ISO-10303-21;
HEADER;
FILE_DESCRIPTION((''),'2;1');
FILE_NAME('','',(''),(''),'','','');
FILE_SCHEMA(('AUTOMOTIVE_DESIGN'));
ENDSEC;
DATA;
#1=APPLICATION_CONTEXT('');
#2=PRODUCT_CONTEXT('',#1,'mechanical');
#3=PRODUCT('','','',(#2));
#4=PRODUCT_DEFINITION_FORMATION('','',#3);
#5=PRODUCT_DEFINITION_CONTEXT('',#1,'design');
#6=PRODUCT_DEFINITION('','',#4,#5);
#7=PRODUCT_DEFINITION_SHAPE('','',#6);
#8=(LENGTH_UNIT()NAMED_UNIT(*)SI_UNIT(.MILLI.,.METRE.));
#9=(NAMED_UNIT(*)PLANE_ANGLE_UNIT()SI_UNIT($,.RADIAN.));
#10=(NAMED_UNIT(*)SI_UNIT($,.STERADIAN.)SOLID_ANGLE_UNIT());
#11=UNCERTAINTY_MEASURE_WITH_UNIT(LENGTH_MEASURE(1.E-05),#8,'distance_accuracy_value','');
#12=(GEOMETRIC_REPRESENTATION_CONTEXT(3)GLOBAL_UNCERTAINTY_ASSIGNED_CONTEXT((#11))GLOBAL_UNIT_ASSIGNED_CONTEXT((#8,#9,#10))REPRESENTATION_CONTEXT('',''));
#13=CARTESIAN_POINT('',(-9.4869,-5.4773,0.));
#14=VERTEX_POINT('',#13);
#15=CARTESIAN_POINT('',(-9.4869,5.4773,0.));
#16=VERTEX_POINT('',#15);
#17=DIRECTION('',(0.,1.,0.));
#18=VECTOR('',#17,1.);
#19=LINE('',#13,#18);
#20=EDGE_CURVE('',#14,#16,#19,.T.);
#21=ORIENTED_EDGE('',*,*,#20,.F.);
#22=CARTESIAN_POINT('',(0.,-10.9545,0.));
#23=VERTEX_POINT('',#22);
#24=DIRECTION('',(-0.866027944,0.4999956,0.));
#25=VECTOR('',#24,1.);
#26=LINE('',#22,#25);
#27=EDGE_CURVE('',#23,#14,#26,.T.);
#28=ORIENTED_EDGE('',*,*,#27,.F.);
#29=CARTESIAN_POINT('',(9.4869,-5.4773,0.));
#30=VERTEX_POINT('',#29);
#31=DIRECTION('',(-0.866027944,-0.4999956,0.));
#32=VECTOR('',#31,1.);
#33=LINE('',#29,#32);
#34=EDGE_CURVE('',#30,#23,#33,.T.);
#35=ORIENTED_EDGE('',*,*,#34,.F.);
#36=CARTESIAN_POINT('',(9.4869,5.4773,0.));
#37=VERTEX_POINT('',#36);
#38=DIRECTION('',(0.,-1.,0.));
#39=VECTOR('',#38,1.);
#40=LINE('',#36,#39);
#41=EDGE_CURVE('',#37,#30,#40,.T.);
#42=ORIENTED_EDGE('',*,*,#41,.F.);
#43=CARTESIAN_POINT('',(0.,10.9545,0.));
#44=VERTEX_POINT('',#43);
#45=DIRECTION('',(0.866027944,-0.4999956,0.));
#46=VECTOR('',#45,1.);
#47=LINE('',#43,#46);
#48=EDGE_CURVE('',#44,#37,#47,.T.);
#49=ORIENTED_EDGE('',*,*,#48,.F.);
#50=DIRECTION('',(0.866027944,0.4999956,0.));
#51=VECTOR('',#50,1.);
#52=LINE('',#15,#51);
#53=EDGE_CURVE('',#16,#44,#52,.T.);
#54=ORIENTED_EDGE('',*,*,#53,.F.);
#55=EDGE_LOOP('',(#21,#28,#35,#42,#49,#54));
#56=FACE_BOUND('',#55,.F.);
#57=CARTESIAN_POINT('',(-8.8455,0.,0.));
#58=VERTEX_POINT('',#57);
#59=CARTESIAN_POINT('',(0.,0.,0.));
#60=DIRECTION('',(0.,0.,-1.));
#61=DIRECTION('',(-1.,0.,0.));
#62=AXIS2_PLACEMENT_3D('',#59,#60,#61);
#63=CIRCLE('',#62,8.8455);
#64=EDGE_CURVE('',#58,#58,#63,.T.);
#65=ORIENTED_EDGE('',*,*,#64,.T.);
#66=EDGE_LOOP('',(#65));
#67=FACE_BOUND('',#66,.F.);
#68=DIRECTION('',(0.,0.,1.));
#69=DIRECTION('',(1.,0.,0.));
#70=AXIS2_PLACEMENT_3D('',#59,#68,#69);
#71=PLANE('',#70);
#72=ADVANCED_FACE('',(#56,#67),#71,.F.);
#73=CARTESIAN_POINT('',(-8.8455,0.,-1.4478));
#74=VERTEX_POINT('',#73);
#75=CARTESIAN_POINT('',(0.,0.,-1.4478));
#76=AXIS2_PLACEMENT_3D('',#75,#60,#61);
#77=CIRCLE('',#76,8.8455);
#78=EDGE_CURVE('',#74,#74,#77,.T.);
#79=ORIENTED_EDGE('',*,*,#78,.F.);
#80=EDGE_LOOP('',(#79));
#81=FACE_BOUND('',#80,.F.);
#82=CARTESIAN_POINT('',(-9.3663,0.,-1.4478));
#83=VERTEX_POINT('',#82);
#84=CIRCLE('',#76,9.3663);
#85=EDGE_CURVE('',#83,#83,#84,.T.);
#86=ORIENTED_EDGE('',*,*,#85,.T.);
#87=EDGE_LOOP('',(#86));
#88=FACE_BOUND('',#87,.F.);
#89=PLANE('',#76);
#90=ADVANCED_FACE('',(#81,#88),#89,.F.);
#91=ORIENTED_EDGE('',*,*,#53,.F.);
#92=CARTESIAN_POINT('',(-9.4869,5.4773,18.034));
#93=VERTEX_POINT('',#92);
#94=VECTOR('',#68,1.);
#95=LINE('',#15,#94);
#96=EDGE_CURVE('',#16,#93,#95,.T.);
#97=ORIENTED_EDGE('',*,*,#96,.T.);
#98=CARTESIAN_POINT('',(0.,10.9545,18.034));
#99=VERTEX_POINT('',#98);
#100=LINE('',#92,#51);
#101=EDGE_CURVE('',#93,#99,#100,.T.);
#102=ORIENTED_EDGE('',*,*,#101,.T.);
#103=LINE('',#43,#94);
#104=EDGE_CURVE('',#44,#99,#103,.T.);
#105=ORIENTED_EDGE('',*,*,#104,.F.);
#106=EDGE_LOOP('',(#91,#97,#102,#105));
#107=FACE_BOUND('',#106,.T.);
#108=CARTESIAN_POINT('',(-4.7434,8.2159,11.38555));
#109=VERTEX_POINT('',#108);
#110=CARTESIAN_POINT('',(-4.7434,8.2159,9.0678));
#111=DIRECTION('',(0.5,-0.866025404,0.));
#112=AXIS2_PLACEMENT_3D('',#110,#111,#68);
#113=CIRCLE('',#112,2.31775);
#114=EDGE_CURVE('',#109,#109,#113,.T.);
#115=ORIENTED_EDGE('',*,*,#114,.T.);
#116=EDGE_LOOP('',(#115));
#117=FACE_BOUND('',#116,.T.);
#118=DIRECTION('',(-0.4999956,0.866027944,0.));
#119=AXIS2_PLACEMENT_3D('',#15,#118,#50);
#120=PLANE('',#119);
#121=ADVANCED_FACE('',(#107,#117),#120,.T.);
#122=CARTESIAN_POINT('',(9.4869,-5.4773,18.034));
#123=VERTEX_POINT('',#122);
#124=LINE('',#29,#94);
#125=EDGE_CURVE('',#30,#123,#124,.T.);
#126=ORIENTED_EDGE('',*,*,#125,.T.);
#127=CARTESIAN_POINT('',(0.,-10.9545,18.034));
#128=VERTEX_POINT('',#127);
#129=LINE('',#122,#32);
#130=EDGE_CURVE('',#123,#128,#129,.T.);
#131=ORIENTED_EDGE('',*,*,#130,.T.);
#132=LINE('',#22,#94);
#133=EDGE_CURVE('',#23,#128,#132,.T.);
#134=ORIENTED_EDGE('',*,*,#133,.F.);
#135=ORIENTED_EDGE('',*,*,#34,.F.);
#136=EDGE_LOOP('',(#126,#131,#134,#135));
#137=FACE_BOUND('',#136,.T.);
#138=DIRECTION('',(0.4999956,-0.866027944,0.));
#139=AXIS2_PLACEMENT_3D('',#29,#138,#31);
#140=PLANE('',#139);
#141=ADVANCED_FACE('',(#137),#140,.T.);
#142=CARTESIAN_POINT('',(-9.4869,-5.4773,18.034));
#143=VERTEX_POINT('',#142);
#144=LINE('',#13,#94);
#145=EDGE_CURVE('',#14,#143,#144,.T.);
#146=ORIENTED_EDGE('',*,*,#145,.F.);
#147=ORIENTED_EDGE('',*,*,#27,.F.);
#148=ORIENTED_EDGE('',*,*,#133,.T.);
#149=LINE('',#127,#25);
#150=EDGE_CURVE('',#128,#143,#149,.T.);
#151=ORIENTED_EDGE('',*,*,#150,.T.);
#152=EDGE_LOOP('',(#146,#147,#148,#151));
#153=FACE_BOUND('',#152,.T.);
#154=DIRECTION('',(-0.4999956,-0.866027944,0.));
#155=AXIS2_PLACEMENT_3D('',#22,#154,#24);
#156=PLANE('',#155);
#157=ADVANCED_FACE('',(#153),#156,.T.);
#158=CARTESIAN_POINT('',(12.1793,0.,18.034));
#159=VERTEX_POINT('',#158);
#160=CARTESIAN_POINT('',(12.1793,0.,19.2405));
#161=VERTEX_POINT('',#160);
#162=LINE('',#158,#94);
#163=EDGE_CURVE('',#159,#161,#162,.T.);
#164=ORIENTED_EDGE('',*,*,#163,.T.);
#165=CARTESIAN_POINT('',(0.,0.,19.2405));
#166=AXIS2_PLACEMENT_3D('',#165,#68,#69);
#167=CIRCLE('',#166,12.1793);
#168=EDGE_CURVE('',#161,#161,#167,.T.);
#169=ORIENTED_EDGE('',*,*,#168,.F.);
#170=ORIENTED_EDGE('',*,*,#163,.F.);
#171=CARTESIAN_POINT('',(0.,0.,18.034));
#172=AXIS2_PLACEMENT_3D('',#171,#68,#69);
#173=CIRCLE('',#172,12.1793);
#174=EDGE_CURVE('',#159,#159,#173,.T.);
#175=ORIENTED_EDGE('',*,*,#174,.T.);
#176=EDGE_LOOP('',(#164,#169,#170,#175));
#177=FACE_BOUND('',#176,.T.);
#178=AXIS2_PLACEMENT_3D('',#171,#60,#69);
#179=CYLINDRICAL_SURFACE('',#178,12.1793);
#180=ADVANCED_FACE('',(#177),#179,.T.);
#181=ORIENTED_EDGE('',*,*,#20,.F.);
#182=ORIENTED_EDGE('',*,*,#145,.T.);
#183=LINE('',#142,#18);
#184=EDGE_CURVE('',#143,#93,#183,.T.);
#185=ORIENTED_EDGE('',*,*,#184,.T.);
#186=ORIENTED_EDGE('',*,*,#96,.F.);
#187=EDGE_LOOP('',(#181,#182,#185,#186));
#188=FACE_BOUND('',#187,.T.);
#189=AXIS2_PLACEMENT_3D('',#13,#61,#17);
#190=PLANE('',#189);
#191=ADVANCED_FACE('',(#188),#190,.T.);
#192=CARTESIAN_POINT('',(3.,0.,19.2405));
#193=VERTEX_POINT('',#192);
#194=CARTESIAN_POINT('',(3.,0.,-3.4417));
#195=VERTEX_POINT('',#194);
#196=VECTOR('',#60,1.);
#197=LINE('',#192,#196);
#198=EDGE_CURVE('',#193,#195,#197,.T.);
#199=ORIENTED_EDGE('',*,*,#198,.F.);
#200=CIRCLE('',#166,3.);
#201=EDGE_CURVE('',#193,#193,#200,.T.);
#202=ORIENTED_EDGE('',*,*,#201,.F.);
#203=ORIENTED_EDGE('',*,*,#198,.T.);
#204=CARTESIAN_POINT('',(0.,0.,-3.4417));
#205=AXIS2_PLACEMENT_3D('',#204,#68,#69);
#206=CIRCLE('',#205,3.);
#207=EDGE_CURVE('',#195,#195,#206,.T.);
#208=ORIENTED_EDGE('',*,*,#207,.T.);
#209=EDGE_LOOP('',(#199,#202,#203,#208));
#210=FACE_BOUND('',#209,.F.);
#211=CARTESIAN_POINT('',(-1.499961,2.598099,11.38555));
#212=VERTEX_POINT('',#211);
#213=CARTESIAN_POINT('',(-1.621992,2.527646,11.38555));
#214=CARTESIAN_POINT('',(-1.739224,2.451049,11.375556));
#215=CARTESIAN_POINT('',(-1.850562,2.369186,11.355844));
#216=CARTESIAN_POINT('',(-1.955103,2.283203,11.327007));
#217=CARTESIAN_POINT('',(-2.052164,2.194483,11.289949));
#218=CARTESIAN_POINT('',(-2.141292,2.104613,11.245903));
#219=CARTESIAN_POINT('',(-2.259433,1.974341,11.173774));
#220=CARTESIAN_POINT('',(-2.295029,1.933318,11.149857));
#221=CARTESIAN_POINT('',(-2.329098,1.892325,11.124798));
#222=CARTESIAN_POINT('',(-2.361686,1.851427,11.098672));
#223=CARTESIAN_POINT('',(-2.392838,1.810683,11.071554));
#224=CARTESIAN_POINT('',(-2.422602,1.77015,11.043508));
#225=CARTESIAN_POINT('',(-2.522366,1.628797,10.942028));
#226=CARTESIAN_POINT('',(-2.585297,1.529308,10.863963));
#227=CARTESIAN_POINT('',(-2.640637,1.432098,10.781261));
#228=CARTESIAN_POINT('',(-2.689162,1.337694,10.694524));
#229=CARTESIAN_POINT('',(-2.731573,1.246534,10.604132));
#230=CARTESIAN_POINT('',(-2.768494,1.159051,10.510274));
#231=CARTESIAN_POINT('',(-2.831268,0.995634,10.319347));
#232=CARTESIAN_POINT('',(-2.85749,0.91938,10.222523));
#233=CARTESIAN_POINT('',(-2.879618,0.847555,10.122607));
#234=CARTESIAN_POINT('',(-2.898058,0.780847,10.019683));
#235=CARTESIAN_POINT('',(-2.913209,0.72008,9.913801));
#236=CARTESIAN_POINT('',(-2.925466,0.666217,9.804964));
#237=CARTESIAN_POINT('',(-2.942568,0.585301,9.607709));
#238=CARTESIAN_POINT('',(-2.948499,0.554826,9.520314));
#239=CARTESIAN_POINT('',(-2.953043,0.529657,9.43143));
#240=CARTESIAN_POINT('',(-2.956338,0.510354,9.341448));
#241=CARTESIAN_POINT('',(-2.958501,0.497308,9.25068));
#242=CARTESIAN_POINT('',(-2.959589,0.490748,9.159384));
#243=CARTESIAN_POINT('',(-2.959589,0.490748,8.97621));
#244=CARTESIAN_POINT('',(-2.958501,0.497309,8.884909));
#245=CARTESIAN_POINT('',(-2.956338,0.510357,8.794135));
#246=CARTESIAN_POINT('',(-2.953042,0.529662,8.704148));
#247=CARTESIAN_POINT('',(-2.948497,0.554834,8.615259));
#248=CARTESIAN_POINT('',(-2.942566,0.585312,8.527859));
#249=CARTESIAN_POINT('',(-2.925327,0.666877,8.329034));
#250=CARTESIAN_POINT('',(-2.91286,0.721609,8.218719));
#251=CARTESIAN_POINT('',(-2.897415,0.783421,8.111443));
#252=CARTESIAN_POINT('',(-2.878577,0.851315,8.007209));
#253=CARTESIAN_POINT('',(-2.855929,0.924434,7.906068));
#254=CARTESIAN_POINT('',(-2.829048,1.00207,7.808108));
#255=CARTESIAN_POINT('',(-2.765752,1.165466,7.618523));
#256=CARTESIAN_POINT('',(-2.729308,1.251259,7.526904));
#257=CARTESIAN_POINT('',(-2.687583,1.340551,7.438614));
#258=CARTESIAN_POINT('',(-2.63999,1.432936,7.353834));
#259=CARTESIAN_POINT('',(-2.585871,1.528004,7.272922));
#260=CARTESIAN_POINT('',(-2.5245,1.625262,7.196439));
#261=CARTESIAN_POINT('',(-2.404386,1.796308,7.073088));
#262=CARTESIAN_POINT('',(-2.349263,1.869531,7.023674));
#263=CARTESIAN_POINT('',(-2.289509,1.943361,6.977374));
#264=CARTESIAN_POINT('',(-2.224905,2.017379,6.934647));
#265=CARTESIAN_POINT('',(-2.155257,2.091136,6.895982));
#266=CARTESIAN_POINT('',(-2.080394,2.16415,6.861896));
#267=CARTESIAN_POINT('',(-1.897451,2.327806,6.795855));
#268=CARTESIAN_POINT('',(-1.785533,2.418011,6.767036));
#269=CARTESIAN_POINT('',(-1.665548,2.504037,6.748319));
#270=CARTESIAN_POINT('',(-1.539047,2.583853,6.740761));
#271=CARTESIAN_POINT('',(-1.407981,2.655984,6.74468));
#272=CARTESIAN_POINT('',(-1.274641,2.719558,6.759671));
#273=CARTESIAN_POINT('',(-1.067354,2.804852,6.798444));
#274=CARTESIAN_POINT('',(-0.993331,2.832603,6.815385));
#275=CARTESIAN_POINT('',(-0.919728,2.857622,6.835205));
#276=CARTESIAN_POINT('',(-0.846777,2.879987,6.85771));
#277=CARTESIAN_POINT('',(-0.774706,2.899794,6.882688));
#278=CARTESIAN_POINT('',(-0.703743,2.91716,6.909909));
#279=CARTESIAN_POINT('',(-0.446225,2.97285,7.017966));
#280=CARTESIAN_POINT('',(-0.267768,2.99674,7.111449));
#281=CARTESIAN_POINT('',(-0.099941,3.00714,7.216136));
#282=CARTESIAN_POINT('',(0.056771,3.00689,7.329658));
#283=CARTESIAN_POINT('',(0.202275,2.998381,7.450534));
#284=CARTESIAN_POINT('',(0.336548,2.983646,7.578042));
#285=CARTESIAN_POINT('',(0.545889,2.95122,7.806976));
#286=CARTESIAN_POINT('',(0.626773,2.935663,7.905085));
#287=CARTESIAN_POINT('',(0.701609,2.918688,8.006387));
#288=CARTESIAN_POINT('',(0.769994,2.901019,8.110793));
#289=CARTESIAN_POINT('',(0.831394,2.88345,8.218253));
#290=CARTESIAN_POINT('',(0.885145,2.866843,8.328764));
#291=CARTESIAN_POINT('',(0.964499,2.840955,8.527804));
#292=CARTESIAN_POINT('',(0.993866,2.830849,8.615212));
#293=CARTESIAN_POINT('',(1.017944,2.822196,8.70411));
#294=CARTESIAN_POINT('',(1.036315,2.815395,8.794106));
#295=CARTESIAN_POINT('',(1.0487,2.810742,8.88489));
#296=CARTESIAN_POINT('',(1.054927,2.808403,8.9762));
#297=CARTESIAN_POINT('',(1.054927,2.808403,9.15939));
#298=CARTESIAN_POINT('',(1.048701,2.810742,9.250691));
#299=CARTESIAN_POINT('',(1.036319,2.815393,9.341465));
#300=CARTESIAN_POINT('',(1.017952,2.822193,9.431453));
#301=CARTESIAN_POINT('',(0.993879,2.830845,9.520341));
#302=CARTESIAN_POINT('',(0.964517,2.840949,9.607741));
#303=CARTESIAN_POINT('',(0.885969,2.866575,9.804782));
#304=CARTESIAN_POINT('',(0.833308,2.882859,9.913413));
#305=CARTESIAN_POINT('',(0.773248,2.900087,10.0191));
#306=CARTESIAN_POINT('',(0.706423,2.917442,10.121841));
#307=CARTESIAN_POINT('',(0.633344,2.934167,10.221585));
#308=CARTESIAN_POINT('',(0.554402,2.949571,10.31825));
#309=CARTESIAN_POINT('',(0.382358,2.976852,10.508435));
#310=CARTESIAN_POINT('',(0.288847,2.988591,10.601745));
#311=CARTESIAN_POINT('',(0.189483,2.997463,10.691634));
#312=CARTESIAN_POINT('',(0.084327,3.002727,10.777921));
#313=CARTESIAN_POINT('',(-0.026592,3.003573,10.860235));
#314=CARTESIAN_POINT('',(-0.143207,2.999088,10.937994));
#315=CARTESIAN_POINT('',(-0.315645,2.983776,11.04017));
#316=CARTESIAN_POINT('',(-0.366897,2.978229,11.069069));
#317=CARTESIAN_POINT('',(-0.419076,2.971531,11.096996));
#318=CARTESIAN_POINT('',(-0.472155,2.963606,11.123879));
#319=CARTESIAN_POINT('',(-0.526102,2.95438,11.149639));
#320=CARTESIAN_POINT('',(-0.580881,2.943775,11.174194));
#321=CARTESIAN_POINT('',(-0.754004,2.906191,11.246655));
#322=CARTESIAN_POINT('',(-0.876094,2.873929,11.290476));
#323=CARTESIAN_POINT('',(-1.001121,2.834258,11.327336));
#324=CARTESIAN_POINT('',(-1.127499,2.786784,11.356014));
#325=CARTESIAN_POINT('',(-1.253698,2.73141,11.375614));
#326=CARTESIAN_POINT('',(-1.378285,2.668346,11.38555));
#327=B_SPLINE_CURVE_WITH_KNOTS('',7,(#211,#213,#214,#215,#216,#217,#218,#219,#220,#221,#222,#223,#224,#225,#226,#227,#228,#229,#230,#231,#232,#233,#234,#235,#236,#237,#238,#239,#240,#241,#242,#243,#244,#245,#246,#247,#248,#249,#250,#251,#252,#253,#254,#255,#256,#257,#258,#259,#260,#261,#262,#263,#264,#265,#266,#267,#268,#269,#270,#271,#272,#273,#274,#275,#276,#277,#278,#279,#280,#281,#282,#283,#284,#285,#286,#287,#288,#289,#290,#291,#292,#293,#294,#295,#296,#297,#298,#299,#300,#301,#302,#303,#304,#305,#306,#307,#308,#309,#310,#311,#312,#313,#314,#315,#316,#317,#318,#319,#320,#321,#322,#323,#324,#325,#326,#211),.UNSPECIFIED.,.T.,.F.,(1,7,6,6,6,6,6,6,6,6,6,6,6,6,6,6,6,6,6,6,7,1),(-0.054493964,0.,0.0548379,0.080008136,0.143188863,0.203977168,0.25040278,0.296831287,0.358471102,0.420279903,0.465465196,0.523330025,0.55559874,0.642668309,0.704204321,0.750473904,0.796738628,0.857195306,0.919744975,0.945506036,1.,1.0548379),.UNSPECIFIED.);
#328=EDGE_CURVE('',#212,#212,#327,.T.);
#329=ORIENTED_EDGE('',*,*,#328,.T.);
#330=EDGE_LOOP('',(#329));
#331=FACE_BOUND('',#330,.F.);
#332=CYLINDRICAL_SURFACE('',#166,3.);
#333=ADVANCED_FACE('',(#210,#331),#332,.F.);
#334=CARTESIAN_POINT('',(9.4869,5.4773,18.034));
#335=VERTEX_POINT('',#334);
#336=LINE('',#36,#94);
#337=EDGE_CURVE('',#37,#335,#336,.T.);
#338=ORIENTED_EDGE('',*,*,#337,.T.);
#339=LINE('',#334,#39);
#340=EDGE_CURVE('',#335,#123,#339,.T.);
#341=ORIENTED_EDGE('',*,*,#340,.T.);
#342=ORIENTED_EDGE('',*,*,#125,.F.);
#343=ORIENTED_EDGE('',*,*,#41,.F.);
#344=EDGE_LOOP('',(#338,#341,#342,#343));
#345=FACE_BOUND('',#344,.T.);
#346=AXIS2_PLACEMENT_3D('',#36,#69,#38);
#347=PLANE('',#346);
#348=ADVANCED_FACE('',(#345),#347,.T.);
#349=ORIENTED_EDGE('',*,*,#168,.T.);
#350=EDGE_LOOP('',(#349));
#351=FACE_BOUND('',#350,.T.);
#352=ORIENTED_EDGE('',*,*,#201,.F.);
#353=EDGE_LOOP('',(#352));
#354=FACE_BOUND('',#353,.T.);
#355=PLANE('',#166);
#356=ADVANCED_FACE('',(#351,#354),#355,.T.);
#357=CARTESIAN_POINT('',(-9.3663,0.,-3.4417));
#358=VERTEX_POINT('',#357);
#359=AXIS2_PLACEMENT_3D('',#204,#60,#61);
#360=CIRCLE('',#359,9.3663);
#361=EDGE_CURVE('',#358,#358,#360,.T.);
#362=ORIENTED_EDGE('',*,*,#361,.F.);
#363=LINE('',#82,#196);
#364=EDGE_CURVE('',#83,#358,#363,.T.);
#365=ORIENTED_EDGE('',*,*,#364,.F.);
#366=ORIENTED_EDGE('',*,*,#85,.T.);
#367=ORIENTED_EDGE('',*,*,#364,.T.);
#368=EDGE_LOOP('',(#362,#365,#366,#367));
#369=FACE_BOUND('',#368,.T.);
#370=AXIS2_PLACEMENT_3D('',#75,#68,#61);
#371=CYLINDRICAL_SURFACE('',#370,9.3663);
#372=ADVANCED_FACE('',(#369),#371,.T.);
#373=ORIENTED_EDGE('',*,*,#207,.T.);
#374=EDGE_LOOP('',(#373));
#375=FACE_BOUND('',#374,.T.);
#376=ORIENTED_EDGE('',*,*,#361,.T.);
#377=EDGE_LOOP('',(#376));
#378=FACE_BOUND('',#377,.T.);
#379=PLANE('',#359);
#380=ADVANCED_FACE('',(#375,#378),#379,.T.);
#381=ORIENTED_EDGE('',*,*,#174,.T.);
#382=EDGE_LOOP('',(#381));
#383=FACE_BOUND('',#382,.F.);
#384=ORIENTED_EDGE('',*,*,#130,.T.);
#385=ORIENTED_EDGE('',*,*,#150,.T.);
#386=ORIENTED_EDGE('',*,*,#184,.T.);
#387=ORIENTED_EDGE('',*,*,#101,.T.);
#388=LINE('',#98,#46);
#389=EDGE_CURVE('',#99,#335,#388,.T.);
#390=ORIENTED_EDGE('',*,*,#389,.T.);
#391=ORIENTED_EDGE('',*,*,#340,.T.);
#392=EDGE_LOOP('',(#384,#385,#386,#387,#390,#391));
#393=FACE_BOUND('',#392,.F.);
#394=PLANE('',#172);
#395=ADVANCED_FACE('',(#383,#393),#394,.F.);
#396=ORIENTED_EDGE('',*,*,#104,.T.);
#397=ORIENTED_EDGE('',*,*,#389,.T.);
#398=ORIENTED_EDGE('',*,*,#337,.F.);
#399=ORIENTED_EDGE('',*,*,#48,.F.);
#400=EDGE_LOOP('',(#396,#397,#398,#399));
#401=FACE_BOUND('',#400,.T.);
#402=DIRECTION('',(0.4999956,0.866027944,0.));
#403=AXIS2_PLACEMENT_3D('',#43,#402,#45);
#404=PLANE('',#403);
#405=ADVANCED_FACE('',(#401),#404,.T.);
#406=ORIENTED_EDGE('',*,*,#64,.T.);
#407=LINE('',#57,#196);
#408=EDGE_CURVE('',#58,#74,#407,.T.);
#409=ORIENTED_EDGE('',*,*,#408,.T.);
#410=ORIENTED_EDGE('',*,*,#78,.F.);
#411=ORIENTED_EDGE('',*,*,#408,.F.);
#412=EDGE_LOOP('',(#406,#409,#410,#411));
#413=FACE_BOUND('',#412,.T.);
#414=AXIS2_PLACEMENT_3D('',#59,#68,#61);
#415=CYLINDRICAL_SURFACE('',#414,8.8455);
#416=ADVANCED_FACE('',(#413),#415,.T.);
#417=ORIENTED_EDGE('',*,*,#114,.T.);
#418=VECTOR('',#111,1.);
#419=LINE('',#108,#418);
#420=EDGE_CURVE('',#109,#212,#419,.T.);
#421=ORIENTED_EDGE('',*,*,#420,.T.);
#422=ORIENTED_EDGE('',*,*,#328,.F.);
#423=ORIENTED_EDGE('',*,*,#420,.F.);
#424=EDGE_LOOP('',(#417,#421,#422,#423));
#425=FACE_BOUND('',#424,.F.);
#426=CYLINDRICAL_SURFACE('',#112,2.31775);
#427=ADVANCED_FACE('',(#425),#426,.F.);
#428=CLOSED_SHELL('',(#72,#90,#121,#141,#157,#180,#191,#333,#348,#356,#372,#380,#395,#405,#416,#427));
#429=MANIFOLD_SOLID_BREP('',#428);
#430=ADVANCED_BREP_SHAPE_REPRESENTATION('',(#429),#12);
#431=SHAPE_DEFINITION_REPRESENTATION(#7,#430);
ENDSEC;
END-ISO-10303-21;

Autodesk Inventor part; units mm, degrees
ref_plane "YZ Plane" through (0, 0, 0) normal (1, 0, 0) x (0, 1, 0)
ref_plane "XZ Plane" through (0, 0, 0) normal (0, 1, 0) x (-1, 0, 0)
ref_plane "XY Plane" through (0, 0, 0) normal (0, 0, 1) x (1, 0, 0)
sketch "Sketch1" plane through (0, 0, 0) normal (0, 0, 1) x (1, 0, 0)
  line L0 (-9.4869, 5.4773) -> (0, 10.9545)
  line L1 (0, 10.9545) -> (9.4869, 5.4773)
  line L2 (9.4869, 5.4773) -> (9.4869, -5.4773)
  line L3 (9.4869, -5.4773) -> (0, -10.9545)
  line L4 (0, -10.9545) -> (-9.4869, -5.4773)
  line L5 (-9.4869, -5.4773) -> (-9.4869, 5.4773)
  point P0 (0, 0)
  point P1 (0, 0)
  dimension "d0" = 18.9738
extrude "Extrusion1" add sketch "Sketch1" along normal blind 18.034
sketch "Sketch2" plane through (0, 0, 18.034) normal (0, 0, 1) x (1, 0, 0)
  circle A0 centre (0, 0) radius 12.1793
  dimension "d3" = 24.3586
extrude "Extrusion2" add sketch "Sketch2" along normal blind 1.2065
sketch "Sketch3" plane through (0, 0, 0) normal (0, 0, -1) x (-1, 0, 0)
  circle A0 centre (0, 0) radius 8.8455
  dimension "d6" = 17.6911
extrude "Extrusion3" add sketch "Sketch3" along normal blind 1.4478
sketch "Sketch4" plane through (0, 0, -1.4478) normal (0, 0, -1) x (-1, 0, 0)
  circle A0 centre (0, 0) radius 9.3663
  dimension "d9" = 18.7325
extrude "Extrusion4" add sketch "Sketch4" along normal blind 1.9939
sketch "Sketch5" plane through (0, 0, 19.2405) normal (0, 0, 1) x (1, 0, 0)
  circle A0 centre (0, 0) radius 3
  dimension "d12" = 6
extrude "Extrusion5" cut sketch "Sketch5" against normal through all
sketch "Sketch6" plane through (0, 10.9545, 18.034) normal (-0.5, 0.8660254, 0) x (0.8660254, 0.5, 0)
  line L0 (-10.9545, 0) -> (0, 0) projected
  line L1 (-10.9545, 18.034) -> (0, 18.034) projected
  circle A0 centre (-5.4773, 8.9662) radius 1.6336
  line L2 (-5.4773, 18.034) -> (-5.4773, 0)
  dimension "d16" = 9.0678
hole "Hole1" at (-4.7434, 8.2159, 9.0678) direction (0.5, -0.8660254, 0) diameter 4.6355 depth 8.89
thread "Thread1" size "10-24 UNC" class "2B" standard "ANSI Unified Screw Threads" full length
properties part number "T80H-SM61" material "Aluminum-6061"
